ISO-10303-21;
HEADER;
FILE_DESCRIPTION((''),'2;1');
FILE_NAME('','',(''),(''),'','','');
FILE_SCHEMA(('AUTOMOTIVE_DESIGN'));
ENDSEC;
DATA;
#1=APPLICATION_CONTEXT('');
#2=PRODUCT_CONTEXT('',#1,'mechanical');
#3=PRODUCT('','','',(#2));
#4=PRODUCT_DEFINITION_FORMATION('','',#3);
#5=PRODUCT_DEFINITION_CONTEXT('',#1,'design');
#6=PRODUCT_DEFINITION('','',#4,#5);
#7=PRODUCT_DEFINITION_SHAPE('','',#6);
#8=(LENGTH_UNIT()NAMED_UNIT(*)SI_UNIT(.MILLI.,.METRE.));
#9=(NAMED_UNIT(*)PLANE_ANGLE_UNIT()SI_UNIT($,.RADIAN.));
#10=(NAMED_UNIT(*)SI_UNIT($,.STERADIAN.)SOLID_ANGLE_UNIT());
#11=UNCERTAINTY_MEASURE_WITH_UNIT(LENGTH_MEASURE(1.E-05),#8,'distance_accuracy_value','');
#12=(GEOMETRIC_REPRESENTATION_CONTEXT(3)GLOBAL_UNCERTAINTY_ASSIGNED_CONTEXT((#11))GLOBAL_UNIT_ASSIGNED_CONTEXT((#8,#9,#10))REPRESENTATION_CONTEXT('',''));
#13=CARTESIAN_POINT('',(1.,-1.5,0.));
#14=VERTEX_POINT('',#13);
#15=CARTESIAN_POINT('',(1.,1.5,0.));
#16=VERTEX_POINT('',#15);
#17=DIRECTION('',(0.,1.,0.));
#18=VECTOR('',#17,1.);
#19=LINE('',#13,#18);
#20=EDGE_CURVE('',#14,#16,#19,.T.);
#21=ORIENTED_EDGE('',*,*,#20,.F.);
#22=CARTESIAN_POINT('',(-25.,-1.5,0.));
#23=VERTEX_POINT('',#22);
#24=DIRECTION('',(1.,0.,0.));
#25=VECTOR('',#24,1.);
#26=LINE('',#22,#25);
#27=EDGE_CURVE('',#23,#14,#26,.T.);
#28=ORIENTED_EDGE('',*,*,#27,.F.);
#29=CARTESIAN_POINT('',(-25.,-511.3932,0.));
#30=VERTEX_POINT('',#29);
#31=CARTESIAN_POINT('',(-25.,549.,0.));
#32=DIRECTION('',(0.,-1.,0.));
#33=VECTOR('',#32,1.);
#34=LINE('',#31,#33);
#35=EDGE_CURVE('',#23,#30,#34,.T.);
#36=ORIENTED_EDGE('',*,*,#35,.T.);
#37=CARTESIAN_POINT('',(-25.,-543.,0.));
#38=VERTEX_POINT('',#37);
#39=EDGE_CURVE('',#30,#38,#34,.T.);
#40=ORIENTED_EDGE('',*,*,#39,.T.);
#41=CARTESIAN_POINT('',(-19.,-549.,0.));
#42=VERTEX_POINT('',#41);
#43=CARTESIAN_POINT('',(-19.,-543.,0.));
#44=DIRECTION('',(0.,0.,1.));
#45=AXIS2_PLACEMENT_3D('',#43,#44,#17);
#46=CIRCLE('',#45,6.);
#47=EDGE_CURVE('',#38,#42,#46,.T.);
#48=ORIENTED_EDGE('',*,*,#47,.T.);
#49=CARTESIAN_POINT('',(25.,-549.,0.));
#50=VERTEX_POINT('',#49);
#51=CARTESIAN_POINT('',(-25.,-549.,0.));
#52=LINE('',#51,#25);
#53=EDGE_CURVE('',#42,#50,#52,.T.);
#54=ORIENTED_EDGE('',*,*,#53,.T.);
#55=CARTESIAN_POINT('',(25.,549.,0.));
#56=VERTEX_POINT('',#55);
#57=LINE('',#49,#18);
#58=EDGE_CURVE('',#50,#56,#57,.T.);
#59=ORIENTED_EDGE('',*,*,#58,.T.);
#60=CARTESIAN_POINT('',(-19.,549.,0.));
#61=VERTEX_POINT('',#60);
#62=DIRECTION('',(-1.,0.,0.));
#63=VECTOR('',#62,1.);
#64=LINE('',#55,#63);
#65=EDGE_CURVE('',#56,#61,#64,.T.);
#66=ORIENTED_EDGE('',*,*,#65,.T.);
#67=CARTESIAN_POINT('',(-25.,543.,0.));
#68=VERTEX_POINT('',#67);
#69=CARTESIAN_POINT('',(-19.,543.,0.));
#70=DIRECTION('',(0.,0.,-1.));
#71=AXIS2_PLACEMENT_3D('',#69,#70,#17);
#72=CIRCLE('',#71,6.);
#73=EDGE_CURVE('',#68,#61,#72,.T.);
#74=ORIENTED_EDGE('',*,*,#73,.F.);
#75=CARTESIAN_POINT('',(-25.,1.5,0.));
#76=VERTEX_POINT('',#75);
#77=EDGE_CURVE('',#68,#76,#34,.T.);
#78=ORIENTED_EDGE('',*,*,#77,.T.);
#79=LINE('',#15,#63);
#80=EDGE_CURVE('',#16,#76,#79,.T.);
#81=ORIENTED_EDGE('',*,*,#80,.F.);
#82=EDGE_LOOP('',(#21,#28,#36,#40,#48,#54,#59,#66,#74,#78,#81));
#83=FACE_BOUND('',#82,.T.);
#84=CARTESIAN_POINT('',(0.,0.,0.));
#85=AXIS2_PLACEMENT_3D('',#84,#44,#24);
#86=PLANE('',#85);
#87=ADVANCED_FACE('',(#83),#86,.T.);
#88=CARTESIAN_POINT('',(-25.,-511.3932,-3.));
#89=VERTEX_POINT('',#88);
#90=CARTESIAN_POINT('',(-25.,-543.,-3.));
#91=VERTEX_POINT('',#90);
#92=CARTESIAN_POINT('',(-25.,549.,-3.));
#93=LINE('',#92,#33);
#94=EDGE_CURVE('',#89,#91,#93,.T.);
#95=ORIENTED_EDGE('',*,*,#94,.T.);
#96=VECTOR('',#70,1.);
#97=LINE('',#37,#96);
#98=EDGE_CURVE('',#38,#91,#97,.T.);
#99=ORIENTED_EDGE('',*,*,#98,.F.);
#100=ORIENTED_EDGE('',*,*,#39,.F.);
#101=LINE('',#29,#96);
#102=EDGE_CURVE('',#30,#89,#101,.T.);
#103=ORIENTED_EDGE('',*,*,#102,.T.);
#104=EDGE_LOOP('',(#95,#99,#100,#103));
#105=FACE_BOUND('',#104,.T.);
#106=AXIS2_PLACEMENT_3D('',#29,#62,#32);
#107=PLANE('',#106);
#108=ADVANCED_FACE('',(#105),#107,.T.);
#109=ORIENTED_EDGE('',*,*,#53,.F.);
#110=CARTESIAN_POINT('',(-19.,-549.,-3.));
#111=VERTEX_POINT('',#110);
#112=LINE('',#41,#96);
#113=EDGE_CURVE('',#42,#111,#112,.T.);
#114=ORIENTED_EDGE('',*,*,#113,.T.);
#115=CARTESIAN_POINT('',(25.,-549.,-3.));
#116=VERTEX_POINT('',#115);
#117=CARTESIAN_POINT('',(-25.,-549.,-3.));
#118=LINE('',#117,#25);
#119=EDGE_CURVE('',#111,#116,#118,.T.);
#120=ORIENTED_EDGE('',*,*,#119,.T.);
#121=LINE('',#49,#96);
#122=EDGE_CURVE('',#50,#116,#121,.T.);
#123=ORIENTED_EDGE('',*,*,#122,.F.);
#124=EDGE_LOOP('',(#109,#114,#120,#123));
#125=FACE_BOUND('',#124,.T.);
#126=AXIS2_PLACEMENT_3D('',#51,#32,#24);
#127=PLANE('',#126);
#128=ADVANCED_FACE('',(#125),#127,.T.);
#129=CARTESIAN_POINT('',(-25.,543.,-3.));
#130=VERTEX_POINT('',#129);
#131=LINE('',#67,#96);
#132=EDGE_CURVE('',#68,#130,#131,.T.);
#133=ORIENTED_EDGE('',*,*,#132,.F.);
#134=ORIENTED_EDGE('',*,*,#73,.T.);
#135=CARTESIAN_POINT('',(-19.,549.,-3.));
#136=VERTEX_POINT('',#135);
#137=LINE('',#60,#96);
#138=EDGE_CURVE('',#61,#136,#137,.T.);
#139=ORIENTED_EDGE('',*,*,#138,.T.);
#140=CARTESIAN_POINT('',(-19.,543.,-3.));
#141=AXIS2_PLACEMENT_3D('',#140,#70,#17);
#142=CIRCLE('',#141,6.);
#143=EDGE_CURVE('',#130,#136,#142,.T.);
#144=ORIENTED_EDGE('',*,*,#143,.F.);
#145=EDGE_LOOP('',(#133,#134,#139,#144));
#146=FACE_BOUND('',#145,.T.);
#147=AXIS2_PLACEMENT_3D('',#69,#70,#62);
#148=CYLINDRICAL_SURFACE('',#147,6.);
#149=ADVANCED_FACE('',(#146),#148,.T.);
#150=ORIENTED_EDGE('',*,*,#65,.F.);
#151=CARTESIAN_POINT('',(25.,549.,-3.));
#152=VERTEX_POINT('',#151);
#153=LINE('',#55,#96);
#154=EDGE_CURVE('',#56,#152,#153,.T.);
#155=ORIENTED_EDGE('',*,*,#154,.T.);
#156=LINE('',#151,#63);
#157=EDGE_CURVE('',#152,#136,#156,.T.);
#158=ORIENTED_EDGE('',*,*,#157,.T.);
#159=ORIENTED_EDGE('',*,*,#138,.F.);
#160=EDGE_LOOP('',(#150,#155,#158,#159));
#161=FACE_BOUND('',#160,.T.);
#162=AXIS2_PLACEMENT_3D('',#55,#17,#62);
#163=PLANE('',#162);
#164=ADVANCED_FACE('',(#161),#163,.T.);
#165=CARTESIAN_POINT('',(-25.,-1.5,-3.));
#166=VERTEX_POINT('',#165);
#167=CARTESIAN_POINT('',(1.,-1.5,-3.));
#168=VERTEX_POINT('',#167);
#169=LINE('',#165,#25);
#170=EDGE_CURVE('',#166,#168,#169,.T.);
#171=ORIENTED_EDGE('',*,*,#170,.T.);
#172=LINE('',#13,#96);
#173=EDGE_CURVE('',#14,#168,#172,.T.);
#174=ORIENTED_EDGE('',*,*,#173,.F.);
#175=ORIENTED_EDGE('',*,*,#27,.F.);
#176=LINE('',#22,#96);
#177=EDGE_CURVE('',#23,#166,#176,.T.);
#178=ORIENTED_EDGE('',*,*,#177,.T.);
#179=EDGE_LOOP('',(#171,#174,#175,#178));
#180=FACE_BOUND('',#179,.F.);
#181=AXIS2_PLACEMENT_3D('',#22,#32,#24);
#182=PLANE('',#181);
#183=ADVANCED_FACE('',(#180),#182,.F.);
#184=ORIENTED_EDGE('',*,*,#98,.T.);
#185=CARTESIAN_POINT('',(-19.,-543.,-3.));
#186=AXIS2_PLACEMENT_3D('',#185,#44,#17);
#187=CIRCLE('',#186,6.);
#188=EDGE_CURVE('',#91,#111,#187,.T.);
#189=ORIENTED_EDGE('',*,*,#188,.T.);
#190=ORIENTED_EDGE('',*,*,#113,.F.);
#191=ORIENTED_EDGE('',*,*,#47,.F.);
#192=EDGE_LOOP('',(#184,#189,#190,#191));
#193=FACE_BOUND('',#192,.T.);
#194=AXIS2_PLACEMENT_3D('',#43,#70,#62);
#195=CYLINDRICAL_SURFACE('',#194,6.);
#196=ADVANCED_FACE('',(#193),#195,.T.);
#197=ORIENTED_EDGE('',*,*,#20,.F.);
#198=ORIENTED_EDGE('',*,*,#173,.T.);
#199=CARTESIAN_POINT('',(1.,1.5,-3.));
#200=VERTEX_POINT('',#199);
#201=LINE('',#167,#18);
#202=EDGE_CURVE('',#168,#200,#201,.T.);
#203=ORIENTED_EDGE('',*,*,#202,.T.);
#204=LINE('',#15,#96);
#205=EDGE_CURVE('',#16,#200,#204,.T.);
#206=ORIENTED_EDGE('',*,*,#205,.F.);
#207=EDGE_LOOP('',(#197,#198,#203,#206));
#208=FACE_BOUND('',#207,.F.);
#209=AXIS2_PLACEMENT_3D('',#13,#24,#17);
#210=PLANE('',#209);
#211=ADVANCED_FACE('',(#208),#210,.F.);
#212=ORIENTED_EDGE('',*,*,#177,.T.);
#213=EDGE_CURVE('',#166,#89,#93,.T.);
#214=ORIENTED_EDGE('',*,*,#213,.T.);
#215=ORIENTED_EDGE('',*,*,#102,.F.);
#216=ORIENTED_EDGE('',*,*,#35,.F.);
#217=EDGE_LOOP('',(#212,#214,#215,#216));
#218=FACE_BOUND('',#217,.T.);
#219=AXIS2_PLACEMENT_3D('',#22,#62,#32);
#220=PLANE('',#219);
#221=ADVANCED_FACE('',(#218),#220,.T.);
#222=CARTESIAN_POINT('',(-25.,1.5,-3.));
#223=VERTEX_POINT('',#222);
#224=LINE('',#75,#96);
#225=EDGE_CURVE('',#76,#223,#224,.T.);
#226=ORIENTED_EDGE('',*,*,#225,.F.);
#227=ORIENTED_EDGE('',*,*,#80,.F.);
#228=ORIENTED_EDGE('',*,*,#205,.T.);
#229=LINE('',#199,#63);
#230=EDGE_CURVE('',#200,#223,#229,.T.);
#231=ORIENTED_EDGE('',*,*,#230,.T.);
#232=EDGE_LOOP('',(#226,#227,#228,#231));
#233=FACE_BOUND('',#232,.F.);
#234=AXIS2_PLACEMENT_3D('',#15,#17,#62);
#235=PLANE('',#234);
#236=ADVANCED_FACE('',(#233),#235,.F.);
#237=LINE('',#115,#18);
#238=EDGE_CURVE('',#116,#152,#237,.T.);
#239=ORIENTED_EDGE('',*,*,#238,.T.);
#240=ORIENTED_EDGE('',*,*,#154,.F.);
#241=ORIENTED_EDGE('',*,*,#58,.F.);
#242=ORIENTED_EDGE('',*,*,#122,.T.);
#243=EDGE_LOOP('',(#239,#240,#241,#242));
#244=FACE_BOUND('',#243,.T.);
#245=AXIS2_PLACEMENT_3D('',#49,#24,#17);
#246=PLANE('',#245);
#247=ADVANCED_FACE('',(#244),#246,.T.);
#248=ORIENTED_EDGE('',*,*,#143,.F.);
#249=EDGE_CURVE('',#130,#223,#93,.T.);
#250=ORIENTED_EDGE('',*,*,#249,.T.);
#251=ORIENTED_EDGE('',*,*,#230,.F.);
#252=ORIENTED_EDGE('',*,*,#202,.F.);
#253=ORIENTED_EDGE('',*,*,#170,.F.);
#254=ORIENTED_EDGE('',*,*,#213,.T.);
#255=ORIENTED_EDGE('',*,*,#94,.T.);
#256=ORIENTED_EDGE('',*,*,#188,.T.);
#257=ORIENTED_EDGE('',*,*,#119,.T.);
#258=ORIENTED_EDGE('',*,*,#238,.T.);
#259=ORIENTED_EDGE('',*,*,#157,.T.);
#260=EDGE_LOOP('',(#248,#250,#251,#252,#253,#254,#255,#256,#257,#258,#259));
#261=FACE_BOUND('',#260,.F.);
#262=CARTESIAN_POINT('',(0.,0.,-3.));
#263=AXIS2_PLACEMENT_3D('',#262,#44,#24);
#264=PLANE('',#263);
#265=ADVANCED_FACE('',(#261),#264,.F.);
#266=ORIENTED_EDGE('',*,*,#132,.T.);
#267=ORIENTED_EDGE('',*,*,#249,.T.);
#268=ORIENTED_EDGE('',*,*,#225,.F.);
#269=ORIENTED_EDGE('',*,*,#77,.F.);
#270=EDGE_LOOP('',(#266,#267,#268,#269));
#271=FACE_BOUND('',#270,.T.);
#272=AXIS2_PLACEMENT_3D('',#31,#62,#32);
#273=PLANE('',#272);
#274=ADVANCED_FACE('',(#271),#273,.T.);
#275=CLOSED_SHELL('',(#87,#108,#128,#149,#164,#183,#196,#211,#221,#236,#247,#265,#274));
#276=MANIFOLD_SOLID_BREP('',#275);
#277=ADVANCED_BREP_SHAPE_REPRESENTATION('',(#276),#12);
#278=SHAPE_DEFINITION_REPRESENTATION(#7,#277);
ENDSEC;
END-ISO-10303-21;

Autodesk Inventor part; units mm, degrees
ref_plane "YZ Plane" through (0, 0, 0) normal (1, 0, 0) x (0, 1, 0)
ref_plane "XZ Plane" through (0, 0, 0) normal (0, 1, 0) x (-1, 0, 0)
ref_plane "XY Plane" through (0, 0, 0) normal (0, 0, 1) x (1, 0, 0)
sketch "Sketch1" plane through (0, 0, 0) normal (0, 0, 1) x (1, 0, 0)
  line L0 (-25, -549) -> (25, -549)
  line L1 (25, -549) -> (25, 549)
  line L2 (25, 549) -> (-25, 549)
  line L3 (-25, 549) -> (-25, -549)
  line L4 (-25, -549) -> (-25, -511.3932)
  line L5 (-25, -549) -> (25, 549) construction
  line L6 (-25, -1.5) -> (1, -1.5)
  line L7 (1, -1.5) -> (1, 1.5)
  line L8 (1, 1.5) -> (-25, 1.5)
  line L9 (-25, 1.5) -> (-25, -1.5)
  point P0 (0, 0)
  point P1 (0, 0)
  point P2 (-25, 0)
  dimension "d17" = 1098
  dimension "d18" = 50
  dimension "d19" = 3
  dimension "d20" = 26
extrude "Plate2" add sketch "Sketch1" against normal blind 3 contours L3 L6 L7 L8 L2 L1 L0
fillet "Corner Round1" radius 6 2 edges at (-25, -549, -1.5) (-25, 549, -1.5)
equation "\"d18\" = Ширина_креста"
equation "\"d19\" = Thickness"
equation "\"d15\" = Thickness"
equation "\"BendReliefWidth\" = Thickness"
equation "\"BendReliefDepth\" = 0.5 * Thickness"
equation "\"CornerReliefSize\" = 4 * Thickness"
equation "\"MinimumRemnant\" = 2 * Thickness"
equation "\"TransitionRadius\" = BendRadius"
equation "\"JacobiRadiusSize\" = BendRadius"
equation "\"GapSize\" = Thickness"
equation "\"Ширина_креста\" = 50"
equation "\"Thickness\" = 3"
equation "\"BendRadius\" = 5"
properties part number "BSH 505 amplifier" material "Stainless Steel"
